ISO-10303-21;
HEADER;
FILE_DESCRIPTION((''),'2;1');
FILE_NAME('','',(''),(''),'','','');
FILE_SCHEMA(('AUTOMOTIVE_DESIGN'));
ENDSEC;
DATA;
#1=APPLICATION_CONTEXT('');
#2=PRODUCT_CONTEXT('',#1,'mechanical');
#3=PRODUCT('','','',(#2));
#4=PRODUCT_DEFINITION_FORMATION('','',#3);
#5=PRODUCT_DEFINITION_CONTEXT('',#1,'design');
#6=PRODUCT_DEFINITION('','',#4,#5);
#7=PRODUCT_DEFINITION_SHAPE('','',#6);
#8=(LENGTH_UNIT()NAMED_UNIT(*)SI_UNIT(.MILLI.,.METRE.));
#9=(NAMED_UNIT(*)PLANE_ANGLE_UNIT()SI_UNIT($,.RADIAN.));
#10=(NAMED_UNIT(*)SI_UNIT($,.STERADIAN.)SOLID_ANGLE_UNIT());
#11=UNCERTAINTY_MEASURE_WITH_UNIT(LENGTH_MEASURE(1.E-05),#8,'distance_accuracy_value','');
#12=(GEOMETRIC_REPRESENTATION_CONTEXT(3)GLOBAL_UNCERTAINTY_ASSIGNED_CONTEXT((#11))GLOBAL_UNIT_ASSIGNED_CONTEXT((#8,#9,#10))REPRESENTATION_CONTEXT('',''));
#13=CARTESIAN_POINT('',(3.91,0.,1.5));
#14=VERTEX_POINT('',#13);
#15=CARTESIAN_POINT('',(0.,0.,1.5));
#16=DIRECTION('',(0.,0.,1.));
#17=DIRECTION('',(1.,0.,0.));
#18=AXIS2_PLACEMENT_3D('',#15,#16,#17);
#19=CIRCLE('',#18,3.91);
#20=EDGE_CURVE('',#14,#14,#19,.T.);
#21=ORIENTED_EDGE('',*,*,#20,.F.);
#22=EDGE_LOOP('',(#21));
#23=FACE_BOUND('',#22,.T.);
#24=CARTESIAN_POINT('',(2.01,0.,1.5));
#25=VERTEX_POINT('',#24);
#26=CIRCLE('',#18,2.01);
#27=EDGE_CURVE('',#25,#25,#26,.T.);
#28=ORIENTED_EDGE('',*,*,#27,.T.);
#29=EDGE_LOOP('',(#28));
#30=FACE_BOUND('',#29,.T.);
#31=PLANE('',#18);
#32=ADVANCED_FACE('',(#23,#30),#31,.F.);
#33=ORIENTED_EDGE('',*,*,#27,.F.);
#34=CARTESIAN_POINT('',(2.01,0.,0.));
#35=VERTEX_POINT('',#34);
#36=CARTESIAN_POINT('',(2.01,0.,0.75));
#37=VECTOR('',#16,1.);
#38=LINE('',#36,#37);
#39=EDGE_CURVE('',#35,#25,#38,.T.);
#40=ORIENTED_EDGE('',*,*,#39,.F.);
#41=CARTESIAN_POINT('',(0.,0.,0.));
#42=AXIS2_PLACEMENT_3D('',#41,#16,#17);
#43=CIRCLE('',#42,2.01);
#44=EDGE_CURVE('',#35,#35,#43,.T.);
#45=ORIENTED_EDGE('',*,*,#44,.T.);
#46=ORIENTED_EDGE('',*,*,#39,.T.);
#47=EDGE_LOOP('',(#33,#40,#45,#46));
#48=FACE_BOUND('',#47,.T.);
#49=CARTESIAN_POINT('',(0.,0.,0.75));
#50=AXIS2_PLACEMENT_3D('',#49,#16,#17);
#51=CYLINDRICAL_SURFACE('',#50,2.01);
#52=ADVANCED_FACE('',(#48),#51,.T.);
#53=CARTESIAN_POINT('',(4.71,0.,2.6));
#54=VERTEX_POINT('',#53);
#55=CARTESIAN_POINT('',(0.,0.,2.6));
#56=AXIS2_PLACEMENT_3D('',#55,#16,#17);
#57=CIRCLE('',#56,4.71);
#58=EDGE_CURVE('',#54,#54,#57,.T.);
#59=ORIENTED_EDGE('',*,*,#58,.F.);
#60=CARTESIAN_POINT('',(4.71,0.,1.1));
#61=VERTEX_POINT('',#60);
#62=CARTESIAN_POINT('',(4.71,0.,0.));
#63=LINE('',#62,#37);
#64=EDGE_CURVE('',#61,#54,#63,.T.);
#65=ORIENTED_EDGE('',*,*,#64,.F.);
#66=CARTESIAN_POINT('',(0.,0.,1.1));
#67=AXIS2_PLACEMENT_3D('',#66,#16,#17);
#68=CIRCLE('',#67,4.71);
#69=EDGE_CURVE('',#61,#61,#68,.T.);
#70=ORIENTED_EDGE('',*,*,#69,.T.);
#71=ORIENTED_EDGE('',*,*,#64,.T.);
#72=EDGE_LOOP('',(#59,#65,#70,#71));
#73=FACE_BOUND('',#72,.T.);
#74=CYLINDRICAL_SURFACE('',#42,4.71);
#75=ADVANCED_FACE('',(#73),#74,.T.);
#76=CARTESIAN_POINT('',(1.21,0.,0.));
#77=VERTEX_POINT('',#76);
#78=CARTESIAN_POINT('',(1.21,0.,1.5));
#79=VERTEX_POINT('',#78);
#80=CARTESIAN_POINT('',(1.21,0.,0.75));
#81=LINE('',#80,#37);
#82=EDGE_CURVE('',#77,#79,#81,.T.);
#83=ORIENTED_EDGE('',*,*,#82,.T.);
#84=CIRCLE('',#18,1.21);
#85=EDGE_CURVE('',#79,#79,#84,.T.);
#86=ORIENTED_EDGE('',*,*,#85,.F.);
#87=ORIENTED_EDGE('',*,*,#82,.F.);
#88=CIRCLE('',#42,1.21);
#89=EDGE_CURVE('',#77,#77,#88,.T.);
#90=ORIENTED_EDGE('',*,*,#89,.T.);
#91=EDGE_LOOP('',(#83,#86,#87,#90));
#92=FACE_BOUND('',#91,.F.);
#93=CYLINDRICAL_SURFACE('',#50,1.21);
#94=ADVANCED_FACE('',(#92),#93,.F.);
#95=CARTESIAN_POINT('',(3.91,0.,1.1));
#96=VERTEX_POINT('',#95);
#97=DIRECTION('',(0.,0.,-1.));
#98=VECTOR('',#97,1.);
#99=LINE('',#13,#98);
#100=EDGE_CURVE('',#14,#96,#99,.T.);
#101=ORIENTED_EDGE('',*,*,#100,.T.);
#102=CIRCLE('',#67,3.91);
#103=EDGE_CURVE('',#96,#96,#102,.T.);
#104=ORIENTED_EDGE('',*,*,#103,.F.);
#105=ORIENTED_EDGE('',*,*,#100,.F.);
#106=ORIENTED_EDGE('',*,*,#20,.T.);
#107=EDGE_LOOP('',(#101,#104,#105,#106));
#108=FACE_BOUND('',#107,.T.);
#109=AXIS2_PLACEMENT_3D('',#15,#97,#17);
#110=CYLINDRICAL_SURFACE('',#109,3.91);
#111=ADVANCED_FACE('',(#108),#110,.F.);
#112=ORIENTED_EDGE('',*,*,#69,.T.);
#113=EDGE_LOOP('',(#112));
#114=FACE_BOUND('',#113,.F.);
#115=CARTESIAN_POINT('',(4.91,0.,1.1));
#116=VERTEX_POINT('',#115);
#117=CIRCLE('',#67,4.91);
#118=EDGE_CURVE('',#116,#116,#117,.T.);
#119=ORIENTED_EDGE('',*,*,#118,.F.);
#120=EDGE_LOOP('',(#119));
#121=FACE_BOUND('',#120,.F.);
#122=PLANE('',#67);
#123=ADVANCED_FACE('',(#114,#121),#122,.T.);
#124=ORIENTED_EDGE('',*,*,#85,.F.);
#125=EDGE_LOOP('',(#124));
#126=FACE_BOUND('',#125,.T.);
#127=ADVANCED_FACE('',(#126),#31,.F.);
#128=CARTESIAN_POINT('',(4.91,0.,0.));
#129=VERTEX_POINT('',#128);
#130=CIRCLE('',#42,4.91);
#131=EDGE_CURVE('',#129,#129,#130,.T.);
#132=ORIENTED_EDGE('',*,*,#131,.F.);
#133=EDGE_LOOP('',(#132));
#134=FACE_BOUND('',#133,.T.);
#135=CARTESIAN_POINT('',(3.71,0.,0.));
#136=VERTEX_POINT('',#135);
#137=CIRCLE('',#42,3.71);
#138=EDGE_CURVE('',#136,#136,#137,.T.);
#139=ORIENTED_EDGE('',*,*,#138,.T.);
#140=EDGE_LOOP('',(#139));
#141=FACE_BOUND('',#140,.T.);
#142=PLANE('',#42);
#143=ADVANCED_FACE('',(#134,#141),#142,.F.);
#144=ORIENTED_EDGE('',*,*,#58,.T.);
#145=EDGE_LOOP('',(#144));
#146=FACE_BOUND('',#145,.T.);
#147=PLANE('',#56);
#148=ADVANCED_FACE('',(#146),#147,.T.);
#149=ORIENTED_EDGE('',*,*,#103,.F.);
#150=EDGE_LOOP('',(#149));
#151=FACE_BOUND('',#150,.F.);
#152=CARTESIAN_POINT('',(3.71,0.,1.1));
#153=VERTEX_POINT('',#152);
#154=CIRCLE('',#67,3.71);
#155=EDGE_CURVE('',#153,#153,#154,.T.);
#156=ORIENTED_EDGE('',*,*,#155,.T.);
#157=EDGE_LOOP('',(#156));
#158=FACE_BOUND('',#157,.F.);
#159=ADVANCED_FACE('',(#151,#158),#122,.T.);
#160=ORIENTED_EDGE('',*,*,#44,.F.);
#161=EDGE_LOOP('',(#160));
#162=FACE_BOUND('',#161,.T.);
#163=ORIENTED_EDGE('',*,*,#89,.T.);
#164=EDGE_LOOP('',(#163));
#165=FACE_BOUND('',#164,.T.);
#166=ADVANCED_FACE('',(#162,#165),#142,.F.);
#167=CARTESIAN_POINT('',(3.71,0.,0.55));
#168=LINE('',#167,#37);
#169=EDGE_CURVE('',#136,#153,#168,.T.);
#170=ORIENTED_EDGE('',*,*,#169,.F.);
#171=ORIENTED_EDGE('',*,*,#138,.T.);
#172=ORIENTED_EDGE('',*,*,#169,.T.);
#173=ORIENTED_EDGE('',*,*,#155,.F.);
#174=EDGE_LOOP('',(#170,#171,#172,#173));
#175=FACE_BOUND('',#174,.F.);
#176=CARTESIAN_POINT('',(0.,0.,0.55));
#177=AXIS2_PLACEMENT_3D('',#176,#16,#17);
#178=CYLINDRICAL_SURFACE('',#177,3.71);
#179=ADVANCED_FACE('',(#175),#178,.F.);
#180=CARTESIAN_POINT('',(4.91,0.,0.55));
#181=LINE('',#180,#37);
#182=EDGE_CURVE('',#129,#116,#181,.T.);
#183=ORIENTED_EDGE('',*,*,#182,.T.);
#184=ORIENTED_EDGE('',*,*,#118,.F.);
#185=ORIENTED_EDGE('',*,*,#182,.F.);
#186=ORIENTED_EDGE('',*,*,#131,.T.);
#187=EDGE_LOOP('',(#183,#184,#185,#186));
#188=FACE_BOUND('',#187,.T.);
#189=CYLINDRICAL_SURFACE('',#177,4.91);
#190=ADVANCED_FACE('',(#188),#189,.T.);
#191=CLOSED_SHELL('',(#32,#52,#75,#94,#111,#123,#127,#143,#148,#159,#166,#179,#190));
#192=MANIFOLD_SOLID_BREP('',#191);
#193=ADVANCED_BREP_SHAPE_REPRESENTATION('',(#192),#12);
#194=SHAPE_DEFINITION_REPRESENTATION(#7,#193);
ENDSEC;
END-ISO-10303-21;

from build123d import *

# Parameters (mm, degrees)
F0_W   = 0.2
F0_H   = 1.1
F0_W_2 = 0.8
F0_H_2 = 1.5


# Not quite as in the source:
# - a feature names something its author has since deleted; it is built from what else it names


with BuildPart() as f1:
    # F0 (on Front) → F1 (revolve)
    with BuildSketch(Plane.XZ):
        Polygon((4.71, 2.6), (0, 2.6), (0, 1.5), (1.21, 1.5), (2.01, 1.5), (3.91, 1.5), (3.91, 1.1), (3.91, 0), (4.71, 0), (4.71, 1.1), align=None)
        with Locations((4.81, 0.55)):
            Rectangle(F0_W, F0_H)
        with Locations((3.81, 0.55)):
            Rectangle(F0_W, F0_H)
        with Locations((1.61, 0.75)):
            Rectangle(F0_W_2, F0_H_2)
    revolve(axis=Axis((0, 0, 1.3), (0, 0, 1)))


solid = f1.part
